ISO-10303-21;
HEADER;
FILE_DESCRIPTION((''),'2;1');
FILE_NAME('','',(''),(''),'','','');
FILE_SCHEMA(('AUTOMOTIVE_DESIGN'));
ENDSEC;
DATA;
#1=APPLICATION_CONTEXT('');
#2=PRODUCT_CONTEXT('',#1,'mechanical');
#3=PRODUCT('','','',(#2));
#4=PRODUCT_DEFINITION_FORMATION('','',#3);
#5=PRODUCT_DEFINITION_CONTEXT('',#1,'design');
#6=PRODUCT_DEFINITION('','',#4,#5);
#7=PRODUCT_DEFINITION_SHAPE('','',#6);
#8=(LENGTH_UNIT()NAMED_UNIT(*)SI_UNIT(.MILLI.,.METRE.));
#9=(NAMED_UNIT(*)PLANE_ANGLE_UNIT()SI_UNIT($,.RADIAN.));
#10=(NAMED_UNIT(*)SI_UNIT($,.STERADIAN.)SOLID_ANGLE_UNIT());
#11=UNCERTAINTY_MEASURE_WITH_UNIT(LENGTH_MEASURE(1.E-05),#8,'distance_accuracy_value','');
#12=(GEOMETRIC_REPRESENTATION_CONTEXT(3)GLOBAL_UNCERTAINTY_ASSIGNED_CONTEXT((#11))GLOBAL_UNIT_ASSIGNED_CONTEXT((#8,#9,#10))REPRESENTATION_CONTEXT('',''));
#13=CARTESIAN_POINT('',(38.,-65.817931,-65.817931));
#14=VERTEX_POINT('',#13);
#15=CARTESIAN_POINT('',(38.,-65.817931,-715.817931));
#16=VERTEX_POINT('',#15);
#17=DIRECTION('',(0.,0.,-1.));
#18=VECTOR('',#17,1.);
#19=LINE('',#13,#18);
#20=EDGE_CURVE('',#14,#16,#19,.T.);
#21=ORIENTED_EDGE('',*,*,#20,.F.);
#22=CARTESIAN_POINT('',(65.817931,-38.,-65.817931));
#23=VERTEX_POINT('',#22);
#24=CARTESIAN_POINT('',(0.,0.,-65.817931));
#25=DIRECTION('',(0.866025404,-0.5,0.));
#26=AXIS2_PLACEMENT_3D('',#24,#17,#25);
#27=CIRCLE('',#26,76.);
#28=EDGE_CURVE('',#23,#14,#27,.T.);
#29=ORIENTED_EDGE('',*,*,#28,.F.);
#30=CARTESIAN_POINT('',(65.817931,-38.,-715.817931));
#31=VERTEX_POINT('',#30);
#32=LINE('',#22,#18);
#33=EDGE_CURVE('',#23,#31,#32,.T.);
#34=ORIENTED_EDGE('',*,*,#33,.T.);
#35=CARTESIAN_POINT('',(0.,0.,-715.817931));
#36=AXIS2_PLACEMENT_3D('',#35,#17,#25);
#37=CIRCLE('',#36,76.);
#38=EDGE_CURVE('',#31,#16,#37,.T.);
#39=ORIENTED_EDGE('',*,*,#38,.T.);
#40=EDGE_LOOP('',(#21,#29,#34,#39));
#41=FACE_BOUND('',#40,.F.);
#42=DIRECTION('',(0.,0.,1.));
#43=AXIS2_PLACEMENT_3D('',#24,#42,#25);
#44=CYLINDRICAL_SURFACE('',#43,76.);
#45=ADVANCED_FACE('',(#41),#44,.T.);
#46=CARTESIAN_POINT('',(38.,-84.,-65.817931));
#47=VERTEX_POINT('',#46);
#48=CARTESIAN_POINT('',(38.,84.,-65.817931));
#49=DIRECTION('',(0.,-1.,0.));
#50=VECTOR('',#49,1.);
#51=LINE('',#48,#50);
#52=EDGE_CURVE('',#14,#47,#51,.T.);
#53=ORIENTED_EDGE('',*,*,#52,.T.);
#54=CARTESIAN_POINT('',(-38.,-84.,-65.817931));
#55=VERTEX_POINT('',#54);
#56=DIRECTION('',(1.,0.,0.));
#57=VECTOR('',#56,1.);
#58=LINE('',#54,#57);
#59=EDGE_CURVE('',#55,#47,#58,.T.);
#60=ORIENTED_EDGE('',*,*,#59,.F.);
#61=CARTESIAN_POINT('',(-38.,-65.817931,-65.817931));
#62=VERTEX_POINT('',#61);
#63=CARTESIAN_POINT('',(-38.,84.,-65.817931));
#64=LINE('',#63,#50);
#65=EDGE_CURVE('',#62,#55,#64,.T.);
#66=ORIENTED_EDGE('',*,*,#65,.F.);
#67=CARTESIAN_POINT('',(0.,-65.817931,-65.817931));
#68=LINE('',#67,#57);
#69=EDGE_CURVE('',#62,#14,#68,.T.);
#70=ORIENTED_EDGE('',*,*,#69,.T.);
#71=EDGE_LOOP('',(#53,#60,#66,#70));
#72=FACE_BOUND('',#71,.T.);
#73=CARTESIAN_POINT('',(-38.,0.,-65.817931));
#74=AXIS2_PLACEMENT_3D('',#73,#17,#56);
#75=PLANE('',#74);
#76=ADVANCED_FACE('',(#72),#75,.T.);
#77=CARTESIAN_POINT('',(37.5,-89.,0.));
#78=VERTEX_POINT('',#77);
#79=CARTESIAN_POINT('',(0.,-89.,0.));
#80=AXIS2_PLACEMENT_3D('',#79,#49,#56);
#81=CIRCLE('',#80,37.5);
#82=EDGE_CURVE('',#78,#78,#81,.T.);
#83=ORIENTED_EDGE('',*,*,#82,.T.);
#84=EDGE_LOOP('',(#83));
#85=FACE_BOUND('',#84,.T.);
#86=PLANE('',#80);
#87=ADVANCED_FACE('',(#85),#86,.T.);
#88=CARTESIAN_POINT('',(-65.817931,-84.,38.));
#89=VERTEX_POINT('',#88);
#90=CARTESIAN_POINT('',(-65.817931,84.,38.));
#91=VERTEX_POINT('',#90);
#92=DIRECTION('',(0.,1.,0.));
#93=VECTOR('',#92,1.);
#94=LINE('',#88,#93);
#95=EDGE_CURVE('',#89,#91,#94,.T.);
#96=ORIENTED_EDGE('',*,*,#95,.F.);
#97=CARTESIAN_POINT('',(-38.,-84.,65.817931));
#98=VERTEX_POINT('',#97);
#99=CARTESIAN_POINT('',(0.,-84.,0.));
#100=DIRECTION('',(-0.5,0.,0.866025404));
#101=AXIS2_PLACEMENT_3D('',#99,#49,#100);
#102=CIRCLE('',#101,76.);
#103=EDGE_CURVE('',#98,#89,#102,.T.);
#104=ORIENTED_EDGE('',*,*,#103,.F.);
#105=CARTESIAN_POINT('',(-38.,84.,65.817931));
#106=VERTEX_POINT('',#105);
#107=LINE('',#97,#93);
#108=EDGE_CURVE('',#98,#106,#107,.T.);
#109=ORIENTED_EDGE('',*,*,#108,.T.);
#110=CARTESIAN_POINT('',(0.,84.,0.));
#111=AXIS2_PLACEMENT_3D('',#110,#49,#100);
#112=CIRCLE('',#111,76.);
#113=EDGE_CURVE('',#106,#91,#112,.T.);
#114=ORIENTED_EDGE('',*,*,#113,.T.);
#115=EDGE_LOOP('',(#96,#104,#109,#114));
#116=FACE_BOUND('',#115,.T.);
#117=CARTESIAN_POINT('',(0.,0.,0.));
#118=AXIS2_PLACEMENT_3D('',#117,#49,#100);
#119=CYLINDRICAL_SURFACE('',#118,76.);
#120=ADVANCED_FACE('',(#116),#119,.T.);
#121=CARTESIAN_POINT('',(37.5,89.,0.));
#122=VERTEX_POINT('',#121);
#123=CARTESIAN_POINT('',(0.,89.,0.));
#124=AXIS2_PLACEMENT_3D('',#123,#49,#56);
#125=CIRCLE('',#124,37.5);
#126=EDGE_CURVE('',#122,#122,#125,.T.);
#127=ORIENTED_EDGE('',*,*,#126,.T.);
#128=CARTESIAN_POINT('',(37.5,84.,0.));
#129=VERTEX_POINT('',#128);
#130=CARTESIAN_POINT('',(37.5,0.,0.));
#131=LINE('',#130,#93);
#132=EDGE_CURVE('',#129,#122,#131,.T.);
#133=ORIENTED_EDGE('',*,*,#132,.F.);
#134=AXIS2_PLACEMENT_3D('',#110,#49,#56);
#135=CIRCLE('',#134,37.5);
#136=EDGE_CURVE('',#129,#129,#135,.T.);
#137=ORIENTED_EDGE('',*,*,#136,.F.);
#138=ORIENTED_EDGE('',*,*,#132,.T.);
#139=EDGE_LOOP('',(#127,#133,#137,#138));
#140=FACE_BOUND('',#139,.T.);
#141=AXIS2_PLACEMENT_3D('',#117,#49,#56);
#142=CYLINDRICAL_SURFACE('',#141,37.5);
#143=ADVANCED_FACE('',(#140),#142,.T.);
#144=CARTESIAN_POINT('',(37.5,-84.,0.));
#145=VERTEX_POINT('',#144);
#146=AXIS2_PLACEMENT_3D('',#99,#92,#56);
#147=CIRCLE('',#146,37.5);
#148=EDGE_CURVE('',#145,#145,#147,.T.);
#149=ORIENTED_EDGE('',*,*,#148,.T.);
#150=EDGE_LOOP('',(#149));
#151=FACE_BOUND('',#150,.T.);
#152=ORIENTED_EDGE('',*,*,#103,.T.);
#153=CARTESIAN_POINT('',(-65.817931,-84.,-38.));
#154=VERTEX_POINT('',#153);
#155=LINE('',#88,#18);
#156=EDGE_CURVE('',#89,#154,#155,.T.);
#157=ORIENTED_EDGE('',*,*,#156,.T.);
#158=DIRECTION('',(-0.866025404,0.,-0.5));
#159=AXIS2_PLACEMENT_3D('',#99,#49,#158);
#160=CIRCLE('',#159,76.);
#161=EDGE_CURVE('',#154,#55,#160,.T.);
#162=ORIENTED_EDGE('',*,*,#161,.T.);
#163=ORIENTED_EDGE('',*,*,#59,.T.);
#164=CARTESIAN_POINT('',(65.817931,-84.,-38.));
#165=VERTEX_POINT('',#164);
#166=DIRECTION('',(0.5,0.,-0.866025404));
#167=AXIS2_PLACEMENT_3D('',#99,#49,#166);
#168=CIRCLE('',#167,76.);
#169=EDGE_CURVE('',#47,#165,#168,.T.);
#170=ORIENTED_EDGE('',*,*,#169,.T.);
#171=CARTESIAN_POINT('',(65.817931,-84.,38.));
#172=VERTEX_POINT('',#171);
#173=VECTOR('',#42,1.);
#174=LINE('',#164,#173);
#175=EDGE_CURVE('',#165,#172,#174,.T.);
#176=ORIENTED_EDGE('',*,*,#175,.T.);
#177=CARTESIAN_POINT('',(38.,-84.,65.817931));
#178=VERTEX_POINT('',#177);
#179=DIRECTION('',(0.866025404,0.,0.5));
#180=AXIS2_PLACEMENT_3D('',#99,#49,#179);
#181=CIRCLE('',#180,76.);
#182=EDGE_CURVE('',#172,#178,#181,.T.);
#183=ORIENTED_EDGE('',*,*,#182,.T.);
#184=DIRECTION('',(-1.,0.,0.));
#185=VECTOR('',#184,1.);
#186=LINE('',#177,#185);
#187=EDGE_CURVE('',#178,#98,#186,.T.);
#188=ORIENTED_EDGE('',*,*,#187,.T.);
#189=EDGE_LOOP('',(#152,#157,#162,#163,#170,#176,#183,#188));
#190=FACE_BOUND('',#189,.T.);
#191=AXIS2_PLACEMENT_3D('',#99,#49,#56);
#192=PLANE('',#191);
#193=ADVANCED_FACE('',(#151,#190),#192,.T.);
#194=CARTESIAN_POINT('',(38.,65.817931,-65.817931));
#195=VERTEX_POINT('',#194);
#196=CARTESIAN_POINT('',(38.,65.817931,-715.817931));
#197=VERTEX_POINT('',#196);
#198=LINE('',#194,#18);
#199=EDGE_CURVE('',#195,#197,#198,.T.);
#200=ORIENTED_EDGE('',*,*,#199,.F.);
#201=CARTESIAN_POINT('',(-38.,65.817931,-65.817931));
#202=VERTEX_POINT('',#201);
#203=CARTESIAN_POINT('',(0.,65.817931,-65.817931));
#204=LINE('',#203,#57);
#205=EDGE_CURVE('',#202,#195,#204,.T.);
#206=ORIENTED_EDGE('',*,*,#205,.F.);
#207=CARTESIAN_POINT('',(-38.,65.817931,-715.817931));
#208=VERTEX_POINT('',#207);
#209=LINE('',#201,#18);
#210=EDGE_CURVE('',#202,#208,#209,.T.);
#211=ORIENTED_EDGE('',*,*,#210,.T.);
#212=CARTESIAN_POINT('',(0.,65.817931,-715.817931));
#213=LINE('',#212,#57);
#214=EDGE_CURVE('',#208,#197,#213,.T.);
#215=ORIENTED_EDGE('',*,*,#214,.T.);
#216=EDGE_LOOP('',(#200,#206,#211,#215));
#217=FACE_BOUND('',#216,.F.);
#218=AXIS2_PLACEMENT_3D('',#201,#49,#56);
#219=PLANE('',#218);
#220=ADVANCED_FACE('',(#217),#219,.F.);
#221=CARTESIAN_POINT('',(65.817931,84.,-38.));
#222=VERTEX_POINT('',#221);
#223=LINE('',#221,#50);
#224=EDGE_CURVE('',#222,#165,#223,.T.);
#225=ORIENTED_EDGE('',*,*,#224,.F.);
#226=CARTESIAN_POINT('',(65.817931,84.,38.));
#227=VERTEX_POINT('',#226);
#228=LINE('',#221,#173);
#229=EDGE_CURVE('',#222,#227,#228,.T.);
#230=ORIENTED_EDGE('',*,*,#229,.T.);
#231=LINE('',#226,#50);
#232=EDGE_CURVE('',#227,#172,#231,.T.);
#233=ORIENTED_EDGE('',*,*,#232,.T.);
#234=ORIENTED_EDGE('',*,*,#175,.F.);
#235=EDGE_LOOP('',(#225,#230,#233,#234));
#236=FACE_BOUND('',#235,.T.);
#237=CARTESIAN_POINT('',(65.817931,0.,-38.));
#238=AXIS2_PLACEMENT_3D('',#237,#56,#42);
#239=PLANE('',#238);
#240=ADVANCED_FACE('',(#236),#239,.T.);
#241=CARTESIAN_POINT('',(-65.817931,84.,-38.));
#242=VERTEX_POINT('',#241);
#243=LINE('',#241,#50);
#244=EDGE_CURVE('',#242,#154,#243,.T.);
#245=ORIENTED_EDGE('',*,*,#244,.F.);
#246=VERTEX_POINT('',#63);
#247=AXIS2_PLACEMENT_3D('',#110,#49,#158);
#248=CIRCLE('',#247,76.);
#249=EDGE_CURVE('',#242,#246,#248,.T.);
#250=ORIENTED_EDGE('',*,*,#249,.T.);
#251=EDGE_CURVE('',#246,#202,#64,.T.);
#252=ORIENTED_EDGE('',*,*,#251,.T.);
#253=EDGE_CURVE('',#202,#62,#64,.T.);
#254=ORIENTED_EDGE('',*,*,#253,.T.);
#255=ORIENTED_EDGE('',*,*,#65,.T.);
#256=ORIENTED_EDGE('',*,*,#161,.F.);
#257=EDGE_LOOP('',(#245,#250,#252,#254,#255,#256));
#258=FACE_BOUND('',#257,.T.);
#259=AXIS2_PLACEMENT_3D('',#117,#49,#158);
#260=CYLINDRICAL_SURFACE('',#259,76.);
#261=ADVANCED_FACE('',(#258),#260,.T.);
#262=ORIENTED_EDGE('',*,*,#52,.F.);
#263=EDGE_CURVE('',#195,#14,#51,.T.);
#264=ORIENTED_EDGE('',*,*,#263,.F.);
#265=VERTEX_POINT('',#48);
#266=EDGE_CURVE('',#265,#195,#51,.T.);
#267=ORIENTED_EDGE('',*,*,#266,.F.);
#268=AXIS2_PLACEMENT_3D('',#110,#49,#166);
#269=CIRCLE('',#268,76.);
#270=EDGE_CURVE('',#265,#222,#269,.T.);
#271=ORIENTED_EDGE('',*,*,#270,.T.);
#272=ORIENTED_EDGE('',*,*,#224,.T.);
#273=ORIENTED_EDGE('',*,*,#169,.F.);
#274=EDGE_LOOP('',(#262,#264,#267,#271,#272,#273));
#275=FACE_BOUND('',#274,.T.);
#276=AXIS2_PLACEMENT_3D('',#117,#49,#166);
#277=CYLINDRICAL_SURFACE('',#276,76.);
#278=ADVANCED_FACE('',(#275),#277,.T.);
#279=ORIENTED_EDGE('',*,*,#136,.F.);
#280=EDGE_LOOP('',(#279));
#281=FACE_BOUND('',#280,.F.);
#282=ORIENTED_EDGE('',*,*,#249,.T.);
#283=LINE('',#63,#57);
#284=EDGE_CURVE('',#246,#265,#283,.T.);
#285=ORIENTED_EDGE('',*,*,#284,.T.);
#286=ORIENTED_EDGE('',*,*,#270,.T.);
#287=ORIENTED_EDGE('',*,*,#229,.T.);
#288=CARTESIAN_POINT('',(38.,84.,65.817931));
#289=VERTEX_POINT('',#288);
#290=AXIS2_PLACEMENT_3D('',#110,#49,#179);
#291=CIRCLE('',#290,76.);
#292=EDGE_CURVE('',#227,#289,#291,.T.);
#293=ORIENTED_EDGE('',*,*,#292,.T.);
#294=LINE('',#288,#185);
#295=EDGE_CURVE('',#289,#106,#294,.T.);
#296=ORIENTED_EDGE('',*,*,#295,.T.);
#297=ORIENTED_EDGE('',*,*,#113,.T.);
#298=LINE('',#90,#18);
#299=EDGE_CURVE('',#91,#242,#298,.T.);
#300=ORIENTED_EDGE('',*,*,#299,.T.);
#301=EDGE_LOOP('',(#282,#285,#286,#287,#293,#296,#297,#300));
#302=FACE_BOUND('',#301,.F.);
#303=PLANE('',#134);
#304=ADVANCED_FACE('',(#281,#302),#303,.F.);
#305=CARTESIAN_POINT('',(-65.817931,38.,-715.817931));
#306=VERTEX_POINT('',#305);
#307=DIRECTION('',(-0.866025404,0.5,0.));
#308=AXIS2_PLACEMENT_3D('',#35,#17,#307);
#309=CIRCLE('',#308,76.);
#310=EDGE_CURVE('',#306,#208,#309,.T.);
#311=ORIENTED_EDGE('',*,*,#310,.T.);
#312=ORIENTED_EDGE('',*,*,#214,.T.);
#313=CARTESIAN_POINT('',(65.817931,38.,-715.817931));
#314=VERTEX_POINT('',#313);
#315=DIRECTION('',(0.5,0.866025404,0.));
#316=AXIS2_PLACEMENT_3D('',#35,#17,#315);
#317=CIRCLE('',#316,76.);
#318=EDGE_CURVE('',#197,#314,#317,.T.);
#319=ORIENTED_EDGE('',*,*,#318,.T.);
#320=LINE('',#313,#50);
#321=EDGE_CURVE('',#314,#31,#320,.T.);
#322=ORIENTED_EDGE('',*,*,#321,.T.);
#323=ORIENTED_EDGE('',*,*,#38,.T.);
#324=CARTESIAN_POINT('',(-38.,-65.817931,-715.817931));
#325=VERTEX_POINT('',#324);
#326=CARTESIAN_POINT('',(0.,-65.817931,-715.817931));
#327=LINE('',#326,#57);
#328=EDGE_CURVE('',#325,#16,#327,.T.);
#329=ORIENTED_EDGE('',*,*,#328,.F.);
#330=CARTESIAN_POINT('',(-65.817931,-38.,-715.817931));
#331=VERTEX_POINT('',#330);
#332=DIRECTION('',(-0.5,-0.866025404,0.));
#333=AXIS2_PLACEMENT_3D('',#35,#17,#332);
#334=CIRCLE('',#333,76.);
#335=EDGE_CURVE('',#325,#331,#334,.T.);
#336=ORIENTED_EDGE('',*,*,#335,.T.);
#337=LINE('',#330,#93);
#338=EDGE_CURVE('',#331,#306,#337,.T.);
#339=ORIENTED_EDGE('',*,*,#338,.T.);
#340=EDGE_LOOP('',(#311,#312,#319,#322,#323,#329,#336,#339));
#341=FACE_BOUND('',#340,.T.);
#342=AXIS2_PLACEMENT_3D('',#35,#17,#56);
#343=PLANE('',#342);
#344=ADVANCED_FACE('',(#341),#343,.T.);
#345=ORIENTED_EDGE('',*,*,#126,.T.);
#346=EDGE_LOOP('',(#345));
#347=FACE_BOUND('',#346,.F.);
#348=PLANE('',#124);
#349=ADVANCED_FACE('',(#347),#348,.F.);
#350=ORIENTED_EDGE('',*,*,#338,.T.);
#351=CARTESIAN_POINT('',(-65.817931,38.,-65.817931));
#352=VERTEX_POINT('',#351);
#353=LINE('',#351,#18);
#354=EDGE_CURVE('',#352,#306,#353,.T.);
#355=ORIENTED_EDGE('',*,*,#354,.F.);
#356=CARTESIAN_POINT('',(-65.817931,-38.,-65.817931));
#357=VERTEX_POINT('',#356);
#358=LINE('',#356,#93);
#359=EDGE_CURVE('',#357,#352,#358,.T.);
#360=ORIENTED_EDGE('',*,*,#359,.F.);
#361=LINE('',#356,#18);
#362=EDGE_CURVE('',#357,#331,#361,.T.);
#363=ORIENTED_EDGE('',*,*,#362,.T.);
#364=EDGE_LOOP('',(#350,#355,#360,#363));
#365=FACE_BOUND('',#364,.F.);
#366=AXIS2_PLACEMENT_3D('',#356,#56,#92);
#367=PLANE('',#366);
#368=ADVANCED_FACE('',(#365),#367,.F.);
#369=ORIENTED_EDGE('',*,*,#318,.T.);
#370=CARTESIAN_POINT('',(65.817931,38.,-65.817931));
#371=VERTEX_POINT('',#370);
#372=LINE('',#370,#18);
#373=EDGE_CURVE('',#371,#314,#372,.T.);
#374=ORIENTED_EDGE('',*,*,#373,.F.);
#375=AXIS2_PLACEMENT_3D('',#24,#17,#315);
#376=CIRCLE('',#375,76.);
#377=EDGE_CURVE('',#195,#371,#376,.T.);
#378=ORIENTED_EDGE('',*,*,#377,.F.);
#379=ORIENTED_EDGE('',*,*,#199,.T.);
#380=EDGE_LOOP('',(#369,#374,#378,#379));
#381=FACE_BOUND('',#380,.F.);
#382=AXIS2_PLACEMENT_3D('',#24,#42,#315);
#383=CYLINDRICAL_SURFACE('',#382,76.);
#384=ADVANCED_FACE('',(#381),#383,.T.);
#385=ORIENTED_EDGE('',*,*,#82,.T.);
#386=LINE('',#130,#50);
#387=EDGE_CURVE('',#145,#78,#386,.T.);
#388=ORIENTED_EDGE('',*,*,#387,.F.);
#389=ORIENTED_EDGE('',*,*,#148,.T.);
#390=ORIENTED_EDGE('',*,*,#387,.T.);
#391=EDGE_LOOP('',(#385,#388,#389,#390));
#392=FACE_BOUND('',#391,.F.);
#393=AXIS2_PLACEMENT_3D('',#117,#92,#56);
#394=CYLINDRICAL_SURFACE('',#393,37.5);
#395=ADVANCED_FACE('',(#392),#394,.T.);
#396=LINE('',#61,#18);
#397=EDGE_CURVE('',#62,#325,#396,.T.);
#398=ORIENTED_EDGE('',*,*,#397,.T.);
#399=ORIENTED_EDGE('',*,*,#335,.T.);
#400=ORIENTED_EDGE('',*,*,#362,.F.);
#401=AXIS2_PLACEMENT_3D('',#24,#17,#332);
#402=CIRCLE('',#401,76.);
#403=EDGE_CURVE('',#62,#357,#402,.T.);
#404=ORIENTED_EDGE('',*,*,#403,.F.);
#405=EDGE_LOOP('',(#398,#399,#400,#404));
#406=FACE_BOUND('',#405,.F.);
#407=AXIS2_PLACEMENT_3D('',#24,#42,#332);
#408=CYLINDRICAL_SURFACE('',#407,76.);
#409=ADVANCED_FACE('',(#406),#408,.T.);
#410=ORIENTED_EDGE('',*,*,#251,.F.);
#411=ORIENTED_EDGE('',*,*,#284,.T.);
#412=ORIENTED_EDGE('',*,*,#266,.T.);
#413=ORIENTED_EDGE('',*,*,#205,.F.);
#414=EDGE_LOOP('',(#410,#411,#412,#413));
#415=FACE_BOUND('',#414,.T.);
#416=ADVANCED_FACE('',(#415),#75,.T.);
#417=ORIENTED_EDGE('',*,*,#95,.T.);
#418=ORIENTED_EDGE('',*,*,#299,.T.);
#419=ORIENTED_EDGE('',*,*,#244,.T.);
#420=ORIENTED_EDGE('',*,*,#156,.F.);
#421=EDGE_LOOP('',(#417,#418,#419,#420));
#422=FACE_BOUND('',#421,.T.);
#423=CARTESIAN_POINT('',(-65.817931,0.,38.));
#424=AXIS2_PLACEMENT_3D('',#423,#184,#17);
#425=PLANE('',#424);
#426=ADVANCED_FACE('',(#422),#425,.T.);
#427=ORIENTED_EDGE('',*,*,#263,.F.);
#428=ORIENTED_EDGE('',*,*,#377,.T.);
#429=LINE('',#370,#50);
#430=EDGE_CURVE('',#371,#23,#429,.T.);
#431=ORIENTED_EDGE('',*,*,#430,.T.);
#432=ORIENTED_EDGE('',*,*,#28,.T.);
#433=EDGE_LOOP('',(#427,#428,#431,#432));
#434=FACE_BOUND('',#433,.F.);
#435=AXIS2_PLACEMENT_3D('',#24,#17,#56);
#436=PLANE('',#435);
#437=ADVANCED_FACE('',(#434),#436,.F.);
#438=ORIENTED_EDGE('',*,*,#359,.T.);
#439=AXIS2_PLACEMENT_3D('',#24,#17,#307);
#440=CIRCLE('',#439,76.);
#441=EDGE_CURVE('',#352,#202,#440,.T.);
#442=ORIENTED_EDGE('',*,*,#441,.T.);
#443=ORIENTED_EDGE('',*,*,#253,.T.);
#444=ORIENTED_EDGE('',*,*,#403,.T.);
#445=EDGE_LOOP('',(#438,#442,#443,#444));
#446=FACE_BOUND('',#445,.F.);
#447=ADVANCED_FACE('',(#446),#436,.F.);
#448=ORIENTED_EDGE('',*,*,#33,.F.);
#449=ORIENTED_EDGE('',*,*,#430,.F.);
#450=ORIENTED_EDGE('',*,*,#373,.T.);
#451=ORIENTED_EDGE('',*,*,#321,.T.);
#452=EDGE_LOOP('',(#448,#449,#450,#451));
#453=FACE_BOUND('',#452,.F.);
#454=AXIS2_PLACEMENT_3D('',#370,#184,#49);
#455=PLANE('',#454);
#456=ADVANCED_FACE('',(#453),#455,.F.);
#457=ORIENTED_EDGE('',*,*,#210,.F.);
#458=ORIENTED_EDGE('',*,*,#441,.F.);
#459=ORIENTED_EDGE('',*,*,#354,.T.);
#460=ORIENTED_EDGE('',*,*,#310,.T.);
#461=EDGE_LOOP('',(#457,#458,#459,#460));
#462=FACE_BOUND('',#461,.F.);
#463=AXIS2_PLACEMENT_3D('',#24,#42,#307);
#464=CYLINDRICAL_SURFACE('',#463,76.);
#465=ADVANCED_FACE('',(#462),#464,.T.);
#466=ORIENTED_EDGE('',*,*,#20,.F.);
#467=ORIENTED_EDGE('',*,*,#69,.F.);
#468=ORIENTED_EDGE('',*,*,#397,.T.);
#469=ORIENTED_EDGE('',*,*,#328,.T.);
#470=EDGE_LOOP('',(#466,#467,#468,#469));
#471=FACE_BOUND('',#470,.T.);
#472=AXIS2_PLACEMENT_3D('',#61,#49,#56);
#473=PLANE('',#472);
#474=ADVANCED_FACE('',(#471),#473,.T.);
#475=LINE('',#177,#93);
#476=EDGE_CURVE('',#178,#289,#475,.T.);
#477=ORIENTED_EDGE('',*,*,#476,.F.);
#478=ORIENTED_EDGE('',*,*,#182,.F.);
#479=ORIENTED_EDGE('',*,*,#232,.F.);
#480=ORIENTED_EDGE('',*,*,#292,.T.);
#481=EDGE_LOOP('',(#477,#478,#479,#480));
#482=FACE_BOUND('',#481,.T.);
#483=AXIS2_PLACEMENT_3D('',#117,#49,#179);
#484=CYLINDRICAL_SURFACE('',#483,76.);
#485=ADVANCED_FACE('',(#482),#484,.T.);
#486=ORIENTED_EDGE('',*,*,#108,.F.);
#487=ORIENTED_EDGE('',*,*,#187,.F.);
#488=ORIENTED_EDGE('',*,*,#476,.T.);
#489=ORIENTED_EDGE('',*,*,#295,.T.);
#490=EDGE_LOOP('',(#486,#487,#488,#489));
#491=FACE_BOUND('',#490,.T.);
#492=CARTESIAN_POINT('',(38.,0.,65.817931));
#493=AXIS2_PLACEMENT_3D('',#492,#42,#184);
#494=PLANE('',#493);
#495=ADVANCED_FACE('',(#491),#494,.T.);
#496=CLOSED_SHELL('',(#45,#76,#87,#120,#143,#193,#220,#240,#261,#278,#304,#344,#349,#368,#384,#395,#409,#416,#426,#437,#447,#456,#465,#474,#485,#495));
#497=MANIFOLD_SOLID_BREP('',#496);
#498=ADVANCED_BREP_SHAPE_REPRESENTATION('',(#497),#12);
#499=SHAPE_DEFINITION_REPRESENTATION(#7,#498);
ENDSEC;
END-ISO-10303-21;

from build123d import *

# Parameters (mm, degrees)
F0_R          = 37.5
F1_DEPTH      = 84
F1_DEPTH_BACK = 84
F2_DEPTH      = 89
F2_DEPTH_BACK = 89
F3_W          = 76
F3_H          = 131.6358613752
F3_R          = 37.5
F4_DEPTH      = 650


with BuildPart() as f1:
    # F0 (on Front) → F1 (new body, two sides)
    with BuildSketch(Plane.XZ) as f1_sk:
        with BuildLine():
            Line((-65.8179306876, 38), (-65.8179306876, -38))
            ThreePointArc((-65.8179306876, -38), (-53.7401153702, -53.7401153702), (-38, -65.8179306876))
            Line((-38, -65.8179306876), (38, -65.8179306876))
            ThreePointArc((38, -65.8179306876), (53.7401153702, -53.7401153702), (65.8179306876, -38))
            Line((65.8179306876, -38), (65.8179306876, 38))
            ThreePointArc((65.8179306876, 38), (53.7401153702, 53.7401153702), (38, 65.8179306876))
            Line((38, 65.8179306876), (-38, 65.8179306876))
            ThreePointArc((-38, 65.8179306876), (-53.7401153702, 53.7401153702), (-65.8179306876, 38))
        make_face()
        Circle(F0_R, mode=Mode.SUBTRACT)
        Circle(F0_R)
    extrude(amount=F1_DEPTH)
    extrude(f1_sk.sketch, amount=-F1_DEPTH_BACK)

    # F0 (on Front) → F2 (join, two sides)
    with BuildSketch(Plane.XZ) as f2_sk:
        Circle(F0_R)
    extrude(amount=F2_DEPTH)
    extrude(f2_sk.sketch, amount=-F2_DEPTH_BACK)

    # F3 (on face) → F4 (join)
    with BuildSketch(Plane(origin=(0, 0, -65.8179306876), x_dir=(1, 0, 0), z_dir=(0, 0, -1))):
        Rectangle(F3_W, F3_H)
        Circle(F3_R, mode=Mode.SUBTRACT)
        Circle(F3_R)
        with BuildLine():
            Line((-65.8179306876, 38), (-65.8179306876, -38))
            ThreePointArc((-65.8179306876, -38), (-53.7401153702, -53.7401153702), (-38, -65.8179306876))
            Line((-38, -65.8179306876), (-38, 65.8179306876))
            ThreePointArc((-38, 65.8179306876), (-53.7401153702, 53.7401153702), (-65.8179306876, 38))
        make_face()
        with BuildLine():
            Line((38, 65.8179306876), (38, -65.8179306876))
            ThreePointArc((38, -65.8179306876), (53.7401153702, -53.7401153702), (65.8179306876, -38))
            Line((65.8179306876, -38), (65.8179306876, 38))
            ThreePointArc((65.8179306876, 38), (53.7401153702, 53.7401153702), (38, 65.8179306876))
        make_face()
    extrude(amount=F4_DEPTH)


solid = f1.part
